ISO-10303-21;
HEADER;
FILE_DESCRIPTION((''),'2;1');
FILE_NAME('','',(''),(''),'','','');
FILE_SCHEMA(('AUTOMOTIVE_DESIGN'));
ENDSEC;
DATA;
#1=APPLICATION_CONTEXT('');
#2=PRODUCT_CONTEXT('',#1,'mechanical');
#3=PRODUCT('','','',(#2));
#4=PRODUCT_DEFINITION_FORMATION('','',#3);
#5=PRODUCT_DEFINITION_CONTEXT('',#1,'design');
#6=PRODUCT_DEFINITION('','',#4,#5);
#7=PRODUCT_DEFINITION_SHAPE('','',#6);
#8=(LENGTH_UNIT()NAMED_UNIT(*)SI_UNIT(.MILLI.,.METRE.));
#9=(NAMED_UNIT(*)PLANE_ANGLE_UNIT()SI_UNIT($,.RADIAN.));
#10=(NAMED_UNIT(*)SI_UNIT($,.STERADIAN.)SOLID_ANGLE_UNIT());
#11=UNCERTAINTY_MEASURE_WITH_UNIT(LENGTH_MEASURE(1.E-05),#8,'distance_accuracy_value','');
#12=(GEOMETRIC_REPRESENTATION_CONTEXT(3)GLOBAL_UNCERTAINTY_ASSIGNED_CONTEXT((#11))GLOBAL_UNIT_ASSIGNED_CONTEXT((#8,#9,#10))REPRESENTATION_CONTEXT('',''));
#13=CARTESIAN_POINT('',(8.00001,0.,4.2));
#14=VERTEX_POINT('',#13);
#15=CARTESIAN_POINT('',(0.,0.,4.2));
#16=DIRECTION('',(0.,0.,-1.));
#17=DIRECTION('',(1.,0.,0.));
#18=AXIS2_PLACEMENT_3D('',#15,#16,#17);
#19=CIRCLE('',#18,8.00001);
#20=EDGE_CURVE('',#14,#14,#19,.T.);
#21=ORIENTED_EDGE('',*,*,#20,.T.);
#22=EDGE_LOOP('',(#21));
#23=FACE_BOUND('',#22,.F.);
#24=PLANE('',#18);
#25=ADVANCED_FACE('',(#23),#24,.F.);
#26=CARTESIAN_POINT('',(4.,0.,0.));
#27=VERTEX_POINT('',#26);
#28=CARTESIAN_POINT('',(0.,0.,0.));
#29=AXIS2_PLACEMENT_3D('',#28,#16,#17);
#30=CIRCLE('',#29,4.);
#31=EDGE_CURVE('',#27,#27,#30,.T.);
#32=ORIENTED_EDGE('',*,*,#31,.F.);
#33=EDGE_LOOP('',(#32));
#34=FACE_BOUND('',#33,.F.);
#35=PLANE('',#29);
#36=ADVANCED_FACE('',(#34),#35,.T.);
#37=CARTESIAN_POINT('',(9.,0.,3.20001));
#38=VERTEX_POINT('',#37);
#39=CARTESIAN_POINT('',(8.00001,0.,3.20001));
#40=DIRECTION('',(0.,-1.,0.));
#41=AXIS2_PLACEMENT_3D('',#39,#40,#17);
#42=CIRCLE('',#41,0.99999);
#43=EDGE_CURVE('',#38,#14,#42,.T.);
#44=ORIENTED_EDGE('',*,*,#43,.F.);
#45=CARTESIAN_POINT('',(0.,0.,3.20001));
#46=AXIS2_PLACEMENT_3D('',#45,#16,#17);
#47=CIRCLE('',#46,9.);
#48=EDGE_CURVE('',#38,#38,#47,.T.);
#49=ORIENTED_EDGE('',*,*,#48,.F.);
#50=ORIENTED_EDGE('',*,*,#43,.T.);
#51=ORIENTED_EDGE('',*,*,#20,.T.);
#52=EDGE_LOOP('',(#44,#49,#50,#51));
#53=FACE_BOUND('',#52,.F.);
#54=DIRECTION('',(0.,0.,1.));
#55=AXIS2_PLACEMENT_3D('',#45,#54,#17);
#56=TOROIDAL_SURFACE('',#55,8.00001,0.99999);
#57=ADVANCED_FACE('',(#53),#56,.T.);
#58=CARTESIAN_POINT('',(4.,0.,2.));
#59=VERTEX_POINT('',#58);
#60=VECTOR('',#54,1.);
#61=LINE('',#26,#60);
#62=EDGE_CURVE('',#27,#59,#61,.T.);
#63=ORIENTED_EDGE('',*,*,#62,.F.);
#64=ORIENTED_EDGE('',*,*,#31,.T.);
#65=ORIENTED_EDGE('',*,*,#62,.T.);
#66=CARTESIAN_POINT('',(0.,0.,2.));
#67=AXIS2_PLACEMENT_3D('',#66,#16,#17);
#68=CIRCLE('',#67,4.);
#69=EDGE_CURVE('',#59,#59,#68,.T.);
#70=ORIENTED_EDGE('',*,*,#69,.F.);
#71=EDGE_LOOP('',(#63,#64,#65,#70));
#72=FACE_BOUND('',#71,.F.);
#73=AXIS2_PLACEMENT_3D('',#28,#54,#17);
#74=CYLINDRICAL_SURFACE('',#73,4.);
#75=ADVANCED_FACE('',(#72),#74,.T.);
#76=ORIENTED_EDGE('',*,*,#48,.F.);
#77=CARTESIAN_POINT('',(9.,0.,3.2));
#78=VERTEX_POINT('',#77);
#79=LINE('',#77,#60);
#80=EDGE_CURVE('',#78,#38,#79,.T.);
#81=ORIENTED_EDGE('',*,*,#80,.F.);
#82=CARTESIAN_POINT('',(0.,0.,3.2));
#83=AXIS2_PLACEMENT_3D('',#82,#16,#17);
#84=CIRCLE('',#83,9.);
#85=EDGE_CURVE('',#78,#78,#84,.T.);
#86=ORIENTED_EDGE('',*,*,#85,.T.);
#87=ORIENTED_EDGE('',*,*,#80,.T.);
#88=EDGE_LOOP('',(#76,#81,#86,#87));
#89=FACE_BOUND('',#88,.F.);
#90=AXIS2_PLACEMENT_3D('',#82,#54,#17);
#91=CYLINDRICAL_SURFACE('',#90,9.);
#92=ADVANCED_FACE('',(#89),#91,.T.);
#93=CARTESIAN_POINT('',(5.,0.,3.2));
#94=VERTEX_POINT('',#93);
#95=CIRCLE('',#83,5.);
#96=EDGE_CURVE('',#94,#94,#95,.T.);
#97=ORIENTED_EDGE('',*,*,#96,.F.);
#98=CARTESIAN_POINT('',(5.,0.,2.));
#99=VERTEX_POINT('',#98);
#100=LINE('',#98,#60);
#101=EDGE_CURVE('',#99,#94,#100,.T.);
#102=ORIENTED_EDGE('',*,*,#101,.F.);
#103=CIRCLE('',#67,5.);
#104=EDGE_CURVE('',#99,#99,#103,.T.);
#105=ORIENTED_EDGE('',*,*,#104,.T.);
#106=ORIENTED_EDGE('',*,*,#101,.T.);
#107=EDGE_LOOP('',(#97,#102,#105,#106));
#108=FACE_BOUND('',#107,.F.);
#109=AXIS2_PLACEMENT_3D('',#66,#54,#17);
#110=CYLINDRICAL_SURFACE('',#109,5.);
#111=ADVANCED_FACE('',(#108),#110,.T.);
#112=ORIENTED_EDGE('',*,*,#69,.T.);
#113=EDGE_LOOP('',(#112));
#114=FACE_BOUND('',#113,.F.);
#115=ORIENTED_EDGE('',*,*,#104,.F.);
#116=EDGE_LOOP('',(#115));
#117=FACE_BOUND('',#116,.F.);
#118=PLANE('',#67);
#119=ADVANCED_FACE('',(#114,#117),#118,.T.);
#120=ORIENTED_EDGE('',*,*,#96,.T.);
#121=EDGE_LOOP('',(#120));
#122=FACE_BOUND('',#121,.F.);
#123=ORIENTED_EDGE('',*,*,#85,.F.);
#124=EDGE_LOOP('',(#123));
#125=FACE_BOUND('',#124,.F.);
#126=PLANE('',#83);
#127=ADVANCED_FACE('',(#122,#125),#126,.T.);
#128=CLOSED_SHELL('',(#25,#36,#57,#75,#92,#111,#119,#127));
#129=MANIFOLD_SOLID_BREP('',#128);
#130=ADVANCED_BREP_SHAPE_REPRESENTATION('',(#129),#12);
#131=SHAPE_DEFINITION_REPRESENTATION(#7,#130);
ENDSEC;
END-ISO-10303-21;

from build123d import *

# Parameters (mm, degrees)
F2_R = 0.99999


# Not quite as in the source:
# - a fillet or chamfer is up to 0.001 mm smaller than in the source, because OpenCascade refuses the exact size


with BuildPart() as f1:
    # F0 (on Front) → F1 (revolve)
    with BuildSketch(Plane.XZ):
        Polygon((0, 4.2), (0, 0), (4, 0), (4, 2), (5, 2), (5, 3.2), (9, 3.2), (9, 4.2), align=None)
    revolve(axis=Axis((0, 0, 2.1), (0, 0, -1)))

    # F2 (radius 1 in the source; OpenCascade refuses exactly that, so slightly less here)
    f2_edges = [f1.edges().sort_by_distance(p)[0] for p in [
        (-9, 0, 4.2),
    ]]
    fillet(f2_edges, radius=F2_R)


solid = f1.part
